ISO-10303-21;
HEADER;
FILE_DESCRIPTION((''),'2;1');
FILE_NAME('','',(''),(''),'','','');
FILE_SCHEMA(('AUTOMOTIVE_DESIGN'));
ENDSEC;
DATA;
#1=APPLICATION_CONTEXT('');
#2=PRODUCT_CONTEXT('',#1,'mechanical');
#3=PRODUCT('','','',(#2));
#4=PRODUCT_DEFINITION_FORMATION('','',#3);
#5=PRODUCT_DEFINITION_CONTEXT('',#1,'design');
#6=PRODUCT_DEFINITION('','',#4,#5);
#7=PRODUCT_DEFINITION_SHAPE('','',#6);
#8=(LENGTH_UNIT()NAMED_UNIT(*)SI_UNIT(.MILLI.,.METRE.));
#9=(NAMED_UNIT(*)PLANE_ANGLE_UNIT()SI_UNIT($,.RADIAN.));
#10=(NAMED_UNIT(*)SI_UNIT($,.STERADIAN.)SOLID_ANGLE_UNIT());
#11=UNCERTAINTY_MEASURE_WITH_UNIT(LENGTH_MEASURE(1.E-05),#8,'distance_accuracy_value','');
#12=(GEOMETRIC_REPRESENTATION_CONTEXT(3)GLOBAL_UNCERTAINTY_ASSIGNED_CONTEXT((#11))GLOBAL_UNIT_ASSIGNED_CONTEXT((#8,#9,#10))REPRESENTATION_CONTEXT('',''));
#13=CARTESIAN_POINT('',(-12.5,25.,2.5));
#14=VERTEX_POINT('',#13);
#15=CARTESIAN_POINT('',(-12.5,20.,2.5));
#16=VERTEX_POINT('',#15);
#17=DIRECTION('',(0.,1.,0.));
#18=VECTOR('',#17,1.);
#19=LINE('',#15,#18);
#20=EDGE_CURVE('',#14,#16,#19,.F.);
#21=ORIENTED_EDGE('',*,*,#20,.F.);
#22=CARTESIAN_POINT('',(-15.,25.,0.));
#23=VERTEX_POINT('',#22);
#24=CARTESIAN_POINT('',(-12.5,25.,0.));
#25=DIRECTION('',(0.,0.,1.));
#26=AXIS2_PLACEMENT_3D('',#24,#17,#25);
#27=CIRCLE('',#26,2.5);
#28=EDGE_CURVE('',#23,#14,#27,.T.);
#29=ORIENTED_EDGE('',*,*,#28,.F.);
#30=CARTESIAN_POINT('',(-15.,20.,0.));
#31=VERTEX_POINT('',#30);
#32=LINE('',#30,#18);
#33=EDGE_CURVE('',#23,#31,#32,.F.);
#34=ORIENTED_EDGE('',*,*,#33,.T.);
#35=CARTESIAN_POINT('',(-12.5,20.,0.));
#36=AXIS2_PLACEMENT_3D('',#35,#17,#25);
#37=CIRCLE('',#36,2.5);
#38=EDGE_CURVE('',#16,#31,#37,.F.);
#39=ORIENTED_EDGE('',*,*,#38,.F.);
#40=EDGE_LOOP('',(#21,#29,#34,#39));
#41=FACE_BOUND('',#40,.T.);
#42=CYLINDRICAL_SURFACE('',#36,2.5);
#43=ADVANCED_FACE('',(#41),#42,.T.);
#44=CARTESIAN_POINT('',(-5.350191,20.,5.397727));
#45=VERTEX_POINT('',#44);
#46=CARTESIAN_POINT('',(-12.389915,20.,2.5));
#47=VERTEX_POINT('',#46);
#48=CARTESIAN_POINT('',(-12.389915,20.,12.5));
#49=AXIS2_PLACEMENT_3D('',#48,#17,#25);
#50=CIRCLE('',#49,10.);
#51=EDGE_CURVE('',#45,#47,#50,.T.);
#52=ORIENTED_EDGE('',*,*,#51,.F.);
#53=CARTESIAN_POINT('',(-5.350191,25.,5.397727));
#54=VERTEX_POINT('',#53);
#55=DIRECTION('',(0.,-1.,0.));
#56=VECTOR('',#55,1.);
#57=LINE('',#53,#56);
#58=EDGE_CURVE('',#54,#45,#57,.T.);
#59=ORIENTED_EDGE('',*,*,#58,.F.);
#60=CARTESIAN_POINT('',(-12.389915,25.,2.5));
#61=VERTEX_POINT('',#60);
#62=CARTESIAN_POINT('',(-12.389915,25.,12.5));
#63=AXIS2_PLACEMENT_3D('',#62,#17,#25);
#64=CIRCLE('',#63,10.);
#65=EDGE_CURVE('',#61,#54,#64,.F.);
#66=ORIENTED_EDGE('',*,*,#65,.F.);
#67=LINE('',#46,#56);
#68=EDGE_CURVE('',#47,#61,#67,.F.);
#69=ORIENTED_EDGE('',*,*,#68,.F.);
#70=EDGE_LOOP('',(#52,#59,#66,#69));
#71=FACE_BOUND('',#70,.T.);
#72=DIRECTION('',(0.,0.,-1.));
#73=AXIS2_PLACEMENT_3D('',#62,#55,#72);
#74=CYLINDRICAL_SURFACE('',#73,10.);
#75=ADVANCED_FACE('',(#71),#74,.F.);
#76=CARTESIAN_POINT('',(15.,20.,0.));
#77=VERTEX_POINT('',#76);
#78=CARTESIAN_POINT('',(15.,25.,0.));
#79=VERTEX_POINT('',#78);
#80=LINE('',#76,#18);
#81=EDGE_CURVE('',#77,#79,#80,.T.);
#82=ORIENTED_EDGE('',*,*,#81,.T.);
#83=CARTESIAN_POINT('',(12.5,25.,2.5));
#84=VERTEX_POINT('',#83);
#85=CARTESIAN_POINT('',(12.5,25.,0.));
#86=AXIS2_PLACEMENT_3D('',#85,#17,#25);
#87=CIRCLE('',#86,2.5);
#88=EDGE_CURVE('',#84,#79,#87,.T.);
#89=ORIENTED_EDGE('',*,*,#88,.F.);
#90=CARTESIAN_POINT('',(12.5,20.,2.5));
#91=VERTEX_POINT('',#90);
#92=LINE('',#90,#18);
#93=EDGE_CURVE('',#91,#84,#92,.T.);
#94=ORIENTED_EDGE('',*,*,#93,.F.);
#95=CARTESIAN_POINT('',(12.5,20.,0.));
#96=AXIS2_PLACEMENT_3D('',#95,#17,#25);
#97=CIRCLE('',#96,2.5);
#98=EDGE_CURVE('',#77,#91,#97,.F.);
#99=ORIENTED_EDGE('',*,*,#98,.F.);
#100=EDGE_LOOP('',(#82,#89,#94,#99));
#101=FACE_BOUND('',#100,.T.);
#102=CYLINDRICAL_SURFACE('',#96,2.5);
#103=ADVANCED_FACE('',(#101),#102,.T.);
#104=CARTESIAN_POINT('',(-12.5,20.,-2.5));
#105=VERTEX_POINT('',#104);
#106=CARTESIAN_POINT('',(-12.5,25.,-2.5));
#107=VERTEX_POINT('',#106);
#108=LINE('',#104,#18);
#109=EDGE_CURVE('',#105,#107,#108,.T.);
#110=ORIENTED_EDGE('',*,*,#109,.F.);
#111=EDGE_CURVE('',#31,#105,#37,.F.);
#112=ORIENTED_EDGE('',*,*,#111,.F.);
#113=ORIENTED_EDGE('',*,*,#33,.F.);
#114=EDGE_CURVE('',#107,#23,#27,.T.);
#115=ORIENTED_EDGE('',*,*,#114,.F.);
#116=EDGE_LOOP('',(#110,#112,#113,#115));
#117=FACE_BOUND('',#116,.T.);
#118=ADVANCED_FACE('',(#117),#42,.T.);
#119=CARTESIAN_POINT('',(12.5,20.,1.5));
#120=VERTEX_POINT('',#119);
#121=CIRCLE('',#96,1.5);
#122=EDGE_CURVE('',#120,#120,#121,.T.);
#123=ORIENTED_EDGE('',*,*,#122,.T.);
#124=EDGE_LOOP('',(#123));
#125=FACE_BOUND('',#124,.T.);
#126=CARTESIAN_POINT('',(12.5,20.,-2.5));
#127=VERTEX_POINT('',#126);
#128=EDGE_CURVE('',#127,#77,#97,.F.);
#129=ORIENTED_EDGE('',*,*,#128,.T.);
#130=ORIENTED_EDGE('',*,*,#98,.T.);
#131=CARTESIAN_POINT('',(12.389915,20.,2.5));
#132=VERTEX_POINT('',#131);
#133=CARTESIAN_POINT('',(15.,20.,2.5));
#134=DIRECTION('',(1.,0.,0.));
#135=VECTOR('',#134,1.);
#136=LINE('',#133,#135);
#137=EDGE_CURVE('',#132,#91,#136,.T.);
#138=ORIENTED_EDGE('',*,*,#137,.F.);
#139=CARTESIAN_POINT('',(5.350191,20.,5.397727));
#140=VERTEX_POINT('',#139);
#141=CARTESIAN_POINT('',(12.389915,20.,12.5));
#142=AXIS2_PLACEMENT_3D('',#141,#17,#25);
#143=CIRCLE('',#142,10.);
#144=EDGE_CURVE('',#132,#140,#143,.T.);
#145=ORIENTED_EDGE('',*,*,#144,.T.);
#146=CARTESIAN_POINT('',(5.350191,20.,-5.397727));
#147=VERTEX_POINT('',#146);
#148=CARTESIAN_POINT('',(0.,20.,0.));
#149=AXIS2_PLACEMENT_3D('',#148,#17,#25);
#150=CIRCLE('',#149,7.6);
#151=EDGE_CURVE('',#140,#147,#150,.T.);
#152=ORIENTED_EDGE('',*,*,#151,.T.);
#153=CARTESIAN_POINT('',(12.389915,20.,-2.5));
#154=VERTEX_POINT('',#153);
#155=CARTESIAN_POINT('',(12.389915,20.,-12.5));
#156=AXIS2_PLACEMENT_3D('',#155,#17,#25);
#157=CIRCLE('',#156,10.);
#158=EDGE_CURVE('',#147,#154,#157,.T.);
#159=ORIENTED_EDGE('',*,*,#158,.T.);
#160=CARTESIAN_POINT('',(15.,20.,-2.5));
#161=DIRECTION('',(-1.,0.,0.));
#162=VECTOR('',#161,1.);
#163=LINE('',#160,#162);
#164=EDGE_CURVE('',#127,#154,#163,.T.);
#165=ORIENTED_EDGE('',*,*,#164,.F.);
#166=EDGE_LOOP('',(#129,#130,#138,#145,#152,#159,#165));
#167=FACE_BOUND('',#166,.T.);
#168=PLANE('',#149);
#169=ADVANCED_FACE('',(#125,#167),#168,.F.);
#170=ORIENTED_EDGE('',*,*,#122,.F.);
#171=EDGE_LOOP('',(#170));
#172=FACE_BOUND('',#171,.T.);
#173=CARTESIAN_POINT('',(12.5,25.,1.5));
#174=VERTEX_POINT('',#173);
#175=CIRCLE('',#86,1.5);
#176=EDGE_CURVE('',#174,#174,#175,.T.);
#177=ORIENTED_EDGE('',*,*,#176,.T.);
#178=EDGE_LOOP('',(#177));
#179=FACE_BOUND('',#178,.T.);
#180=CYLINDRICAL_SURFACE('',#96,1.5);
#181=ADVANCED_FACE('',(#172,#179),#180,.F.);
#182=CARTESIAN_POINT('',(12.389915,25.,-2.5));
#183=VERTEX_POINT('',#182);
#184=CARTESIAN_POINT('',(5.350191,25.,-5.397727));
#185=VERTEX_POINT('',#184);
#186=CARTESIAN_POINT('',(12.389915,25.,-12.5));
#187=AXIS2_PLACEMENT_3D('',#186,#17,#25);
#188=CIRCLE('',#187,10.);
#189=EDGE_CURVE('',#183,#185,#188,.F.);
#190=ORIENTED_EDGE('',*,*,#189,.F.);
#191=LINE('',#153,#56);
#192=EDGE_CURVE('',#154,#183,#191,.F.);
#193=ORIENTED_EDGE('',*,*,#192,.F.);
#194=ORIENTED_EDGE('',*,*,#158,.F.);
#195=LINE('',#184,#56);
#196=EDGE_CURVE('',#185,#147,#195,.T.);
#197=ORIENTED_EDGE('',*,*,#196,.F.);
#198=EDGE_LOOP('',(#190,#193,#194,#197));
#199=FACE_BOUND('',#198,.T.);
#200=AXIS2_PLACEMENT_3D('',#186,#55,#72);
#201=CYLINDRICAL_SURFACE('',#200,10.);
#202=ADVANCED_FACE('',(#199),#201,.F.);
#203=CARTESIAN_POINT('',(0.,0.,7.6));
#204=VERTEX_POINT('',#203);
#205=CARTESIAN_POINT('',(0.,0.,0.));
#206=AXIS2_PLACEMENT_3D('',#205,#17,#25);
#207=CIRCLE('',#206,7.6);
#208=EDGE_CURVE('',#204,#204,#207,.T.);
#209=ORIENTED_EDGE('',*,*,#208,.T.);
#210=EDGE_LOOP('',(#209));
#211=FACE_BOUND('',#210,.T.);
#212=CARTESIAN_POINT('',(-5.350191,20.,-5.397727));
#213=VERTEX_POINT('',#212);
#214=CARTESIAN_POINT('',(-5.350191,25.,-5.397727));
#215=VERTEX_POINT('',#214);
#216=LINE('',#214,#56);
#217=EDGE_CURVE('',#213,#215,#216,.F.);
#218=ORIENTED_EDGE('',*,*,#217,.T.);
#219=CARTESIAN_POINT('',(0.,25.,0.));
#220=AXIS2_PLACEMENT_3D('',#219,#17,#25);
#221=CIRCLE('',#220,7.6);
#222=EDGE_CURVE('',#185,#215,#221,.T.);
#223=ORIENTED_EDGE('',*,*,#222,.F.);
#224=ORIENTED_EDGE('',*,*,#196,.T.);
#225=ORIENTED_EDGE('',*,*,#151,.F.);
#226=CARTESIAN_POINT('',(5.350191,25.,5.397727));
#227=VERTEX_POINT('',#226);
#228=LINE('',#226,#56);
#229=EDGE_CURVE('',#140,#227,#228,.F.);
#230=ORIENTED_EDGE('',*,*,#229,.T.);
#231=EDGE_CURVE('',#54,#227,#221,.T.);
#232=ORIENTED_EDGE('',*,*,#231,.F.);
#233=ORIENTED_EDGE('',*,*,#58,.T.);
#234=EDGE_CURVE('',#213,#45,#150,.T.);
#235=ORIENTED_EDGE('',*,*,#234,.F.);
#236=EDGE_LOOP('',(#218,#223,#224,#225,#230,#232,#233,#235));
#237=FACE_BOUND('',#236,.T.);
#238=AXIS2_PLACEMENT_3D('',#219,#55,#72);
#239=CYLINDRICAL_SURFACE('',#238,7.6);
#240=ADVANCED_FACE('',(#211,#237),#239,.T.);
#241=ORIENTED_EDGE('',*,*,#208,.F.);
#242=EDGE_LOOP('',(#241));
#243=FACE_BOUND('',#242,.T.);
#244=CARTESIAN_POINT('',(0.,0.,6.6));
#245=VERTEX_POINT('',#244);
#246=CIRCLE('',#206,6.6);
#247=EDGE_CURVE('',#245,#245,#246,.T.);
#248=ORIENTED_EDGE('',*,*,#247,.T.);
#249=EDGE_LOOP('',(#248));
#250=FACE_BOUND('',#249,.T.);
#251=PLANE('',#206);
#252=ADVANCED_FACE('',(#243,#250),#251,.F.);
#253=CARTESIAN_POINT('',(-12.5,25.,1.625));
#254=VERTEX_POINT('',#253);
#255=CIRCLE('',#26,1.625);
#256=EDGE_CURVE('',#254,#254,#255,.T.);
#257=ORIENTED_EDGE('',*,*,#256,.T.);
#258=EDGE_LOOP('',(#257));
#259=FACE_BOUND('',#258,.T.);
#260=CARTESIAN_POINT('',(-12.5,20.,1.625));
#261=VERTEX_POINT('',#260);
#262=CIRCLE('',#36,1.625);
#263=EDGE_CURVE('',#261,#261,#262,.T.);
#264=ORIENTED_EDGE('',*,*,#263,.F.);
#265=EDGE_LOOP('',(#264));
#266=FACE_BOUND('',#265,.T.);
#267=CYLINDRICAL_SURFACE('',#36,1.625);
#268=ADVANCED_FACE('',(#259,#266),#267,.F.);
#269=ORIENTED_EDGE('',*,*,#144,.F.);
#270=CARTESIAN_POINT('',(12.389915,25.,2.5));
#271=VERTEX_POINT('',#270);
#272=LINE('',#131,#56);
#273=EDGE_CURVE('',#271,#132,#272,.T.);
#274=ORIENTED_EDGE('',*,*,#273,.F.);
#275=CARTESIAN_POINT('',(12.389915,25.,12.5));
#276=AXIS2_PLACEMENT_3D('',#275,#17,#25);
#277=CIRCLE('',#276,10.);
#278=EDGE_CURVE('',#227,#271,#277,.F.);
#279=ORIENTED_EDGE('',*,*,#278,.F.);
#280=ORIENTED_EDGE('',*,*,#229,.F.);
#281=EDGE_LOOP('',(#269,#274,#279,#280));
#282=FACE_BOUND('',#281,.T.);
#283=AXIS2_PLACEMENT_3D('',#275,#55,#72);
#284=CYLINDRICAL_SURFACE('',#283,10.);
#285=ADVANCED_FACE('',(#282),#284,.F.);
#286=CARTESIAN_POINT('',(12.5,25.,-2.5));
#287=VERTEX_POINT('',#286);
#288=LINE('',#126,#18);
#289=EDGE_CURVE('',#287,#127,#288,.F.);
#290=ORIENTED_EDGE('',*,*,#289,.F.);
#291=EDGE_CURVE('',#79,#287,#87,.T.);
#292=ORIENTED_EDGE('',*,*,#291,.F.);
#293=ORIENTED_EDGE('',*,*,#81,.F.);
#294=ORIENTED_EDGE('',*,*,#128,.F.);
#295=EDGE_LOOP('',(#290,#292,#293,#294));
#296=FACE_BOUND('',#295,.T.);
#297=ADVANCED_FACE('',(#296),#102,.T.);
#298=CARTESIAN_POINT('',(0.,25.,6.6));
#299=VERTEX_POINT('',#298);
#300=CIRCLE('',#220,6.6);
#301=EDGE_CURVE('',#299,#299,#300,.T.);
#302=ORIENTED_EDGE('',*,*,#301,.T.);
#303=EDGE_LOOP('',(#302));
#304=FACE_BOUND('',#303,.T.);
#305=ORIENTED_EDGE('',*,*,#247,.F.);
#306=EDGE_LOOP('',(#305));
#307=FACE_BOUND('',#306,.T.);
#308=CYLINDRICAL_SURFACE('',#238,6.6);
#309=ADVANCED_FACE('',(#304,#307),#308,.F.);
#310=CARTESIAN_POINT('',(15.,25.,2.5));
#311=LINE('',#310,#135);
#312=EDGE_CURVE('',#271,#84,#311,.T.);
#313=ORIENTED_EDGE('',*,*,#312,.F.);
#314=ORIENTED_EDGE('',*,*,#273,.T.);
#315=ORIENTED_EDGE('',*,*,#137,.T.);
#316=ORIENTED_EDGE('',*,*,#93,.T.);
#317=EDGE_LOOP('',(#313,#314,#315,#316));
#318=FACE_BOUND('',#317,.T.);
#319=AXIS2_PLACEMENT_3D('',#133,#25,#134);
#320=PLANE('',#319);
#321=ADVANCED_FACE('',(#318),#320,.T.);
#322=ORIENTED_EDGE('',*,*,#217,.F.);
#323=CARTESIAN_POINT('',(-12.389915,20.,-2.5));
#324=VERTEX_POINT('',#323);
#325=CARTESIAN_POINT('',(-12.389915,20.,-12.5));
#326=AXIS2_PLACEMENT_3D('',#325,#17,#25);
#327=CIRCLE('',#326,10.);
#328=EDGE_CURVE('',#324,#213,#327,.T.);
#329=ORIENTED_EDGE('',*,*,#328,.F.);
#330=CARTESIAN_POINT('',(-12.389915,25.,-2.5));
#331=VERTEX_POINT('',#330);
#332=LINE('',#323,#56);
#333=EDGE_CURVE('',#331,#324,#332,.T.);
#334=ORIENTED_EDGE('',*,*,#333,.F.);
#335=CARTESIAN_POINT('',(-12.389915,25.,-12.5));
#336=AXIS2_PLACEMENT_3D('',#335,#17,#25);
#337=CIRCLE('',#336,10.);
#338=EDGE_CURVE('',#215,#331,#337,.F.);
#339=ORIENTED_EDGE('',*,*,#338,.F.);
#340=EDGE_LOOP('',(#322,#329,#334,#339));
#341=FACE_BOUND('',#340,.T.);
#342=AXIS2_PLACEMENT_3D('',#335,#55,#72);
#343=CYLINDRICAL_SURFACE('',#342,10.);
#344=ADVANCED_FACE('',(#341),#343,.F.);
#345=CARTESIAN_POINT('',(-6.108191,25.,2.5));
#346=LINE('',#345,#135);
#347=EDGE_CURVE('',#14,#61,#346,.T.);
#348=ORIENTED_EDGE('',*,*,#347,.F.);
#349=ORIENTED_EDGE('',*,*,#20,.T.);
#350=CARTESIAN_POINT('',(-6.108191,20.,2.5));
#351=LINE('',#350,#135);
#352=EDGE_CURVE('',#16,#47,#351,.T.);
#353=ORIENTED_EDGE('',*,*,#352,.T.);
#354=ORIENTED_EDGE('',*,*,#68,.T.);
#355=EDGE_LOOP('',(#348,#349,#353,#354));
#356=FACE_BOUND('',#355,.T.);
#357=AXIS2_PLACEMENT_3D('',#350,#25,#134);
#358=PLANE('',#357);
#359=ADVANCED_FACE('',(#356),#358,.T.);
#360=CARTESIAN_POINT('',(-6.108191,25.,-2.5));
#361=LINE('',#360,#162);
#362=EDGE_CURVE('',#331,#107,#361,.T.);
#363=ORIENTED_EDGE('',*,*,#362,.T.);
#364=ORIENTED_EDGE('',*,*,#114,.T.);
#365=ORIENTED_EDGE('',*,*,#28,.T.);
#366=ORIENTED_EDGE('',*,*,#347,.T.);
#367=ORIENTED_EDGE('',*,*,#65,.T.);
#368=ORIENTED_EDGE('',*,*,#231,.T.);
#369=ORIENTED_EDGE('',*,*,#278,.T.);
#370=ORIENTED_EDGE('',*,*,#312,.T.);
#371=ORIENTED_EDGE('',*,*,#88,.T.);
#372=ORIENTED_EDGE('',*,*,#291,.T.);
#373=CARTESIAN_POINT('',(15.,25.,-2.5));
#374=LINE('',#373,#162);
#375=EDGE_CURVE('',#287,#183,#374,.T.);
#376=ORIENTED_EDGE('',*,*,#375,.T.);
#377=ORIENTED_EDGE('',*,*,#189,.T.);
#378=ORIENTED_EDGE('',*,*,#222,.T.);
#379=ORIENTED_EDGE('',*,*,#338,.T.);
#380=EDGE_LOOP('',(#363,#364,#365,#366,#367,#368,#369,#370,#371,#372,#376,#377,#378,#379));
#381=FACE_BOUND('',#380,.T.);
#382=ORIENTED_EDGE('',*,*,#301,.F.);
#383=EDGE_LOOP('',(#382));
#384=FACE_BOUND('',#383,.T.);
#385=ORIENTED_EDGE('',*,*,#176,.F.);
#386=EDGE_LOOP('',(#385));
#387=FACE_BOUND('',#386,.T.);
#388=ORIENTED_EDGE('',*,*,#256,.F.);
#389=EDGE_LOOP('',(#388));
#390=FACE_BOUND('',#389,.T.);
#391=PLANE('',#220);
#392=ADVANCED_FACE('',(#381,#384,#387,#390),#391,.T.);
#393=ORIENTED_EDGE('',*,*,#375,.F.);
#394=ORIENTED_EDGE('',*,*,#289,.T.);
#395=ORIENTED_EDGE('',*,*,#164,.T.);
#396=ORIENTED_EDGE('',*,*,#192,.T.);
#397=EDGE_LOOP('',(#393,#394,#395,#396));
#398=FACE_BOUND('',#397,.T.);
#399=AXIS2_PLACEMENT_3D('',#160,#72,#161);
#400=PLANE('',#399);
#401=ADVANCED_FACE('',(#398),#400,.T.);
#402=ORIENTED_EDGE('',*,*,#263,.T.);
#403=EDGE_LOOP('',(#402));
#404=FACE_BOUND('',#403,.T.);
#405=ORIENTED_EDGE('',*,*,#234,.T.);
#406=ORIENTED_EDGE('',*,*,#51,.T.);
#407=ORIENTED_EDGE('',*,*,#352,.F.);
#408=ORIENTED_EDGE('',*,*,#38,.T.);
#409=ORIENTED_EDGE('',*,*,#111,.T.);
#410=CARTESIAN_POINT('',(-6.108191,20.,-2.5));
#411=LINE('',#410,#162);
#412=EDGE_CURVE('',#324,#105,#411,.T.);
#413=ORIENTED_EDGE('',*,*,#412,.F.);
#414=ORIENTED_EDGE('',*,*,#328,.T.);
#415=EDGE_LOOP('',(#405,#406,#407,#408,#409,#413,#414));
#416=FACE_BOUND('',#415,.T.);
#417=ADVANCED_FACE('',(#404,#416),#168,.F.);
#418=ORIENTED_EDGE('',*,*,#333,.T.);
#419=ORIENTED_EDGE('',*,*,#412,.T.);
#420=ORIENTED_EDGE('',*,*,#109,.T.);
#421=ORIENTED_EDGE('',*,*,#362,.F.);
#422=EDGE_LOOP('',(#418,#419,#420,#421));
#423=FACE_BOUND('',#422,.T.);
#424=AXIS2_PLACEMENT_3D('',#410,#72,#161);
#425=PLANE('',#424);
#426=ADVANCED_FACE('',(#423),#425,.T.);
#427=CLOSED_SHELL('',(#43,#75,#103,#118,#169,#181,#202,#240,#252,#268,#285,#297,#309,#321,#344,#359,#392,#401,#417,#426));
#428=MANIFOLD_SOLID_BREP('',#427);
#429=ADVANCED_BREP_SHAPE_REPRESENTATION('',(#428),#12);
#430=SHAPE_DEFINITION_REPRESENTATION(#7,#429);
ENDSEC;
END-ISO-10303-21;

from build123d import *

# Parameters (mm, degrees)
SKETCH1_R           = 7.6
SKETCH1_R_2         = 6.6
BOSS_EXTRUDE1_DEPTH = 25
BOSS_EXTRUDE2_START = -5
SKETCH2_R           = 1.625
SKETCH2_R_2         = 1.5
BOSS_EXTRUDE2_DEPTH = 5
FILLET1_R           = 10
FILLET2_R           = 2.5


with BuildPart() as part:
    # Sketch1 → Boss-Extrude1 (new body)
    with BuildSketch(Plane(origin=(0, 0, 0), x_dir=(1, 0, 0), z_dir=(0, 1, 0))):
        with Locations(Location((0, 0, 0), (0, 0, 270))):
            Circle(SKETCH1_R)
        with Locations(Location((0, 0, 0), (0, 0, 270))):
            Circle(SKETCH1_R_2, mode=Mode.SUBTRACT)
    extrude(amount=BOSS_EXTRUDE1_DEPTH)

    # Sketch2 → Boss-Extrude2 (add)
    # profile 1 of 2: a face of its own
    with BuildSketch(Plane(origin=(0, 25, 0), x_dir=(1, 0, 0), z_dir=(0, 1, 0)).offset(BOSS_EXTRUDE2_START)):
        with BuildLine():
            Line((-6.108191222, 2.5), (-15, 2.5))
            Line((-15, 2.5), (-15, -2.5))
            Line((-15, -2.5), (-6.108191222, -2.5))
            ThreePointArc((-6.108191222, -2.5), (-6.6, 0), (-6.108191222, 2.5))
        make_face()
        with Locations(Location((-12.5, 0, 0), (0, 0, 270))):
            Circle(SKETCH2_R, mode=Mode.SUBTRACT)
    # profile 2 of 2: a face of its own
    with BuildSketch(Plane(origin=(0, 25, 0), x_dir=(1, 0, 0), z_dir=(0, 1, 0)).offset(BOSS_EXTRUDE2_START)):
        with BuildLine():
            Line((15, -2.5), (6.108191222, -2.5))
            ThreePointArc((6.108191222, -2.5), (6.6, 0), (6.108191222, 2.5))
            Line((6.108191222, 2.5), (15, 2.5))
            Line((15, 2.5), (15, -2.5))
        make_face()
        with Locations(Location((12.5, 0, 0), (0, 0, 270))):
            Circle(SKETCH2_R_2, mode=Mode.SUBTRACT)
    extrude(amount=BOSS_EXTRUDE2_DEPTH)

    # Fillet1
    fillet1_edges = [part.edges().sort_by_distance(p)[0] for p in [
        (-7.177046746, 22.5, -2.5),
        (-7.177046746, 22.5, 2.5),
        (7.177046746, 22.5, 2.5),
        (7.177046746, 22.5, -2.5),
    ]]
    fillet(fillet1_edges, radius=FILLET1_R)

    # Fillet2
    fillet2_edges = [part.edges().sort_by_distance(p)[0] for p in [
        (15, 22.5, 2.5),
        (15, 22.5, -2.5),
        (-15, 22.5, 2.5),
        (-15, 22.5, -2.5),
    ]]
    fillet(fillet2_edges, radius=FILLET2_R - 0.0001)  # a hair under: the kernel refuses the full size


solid = part.part
